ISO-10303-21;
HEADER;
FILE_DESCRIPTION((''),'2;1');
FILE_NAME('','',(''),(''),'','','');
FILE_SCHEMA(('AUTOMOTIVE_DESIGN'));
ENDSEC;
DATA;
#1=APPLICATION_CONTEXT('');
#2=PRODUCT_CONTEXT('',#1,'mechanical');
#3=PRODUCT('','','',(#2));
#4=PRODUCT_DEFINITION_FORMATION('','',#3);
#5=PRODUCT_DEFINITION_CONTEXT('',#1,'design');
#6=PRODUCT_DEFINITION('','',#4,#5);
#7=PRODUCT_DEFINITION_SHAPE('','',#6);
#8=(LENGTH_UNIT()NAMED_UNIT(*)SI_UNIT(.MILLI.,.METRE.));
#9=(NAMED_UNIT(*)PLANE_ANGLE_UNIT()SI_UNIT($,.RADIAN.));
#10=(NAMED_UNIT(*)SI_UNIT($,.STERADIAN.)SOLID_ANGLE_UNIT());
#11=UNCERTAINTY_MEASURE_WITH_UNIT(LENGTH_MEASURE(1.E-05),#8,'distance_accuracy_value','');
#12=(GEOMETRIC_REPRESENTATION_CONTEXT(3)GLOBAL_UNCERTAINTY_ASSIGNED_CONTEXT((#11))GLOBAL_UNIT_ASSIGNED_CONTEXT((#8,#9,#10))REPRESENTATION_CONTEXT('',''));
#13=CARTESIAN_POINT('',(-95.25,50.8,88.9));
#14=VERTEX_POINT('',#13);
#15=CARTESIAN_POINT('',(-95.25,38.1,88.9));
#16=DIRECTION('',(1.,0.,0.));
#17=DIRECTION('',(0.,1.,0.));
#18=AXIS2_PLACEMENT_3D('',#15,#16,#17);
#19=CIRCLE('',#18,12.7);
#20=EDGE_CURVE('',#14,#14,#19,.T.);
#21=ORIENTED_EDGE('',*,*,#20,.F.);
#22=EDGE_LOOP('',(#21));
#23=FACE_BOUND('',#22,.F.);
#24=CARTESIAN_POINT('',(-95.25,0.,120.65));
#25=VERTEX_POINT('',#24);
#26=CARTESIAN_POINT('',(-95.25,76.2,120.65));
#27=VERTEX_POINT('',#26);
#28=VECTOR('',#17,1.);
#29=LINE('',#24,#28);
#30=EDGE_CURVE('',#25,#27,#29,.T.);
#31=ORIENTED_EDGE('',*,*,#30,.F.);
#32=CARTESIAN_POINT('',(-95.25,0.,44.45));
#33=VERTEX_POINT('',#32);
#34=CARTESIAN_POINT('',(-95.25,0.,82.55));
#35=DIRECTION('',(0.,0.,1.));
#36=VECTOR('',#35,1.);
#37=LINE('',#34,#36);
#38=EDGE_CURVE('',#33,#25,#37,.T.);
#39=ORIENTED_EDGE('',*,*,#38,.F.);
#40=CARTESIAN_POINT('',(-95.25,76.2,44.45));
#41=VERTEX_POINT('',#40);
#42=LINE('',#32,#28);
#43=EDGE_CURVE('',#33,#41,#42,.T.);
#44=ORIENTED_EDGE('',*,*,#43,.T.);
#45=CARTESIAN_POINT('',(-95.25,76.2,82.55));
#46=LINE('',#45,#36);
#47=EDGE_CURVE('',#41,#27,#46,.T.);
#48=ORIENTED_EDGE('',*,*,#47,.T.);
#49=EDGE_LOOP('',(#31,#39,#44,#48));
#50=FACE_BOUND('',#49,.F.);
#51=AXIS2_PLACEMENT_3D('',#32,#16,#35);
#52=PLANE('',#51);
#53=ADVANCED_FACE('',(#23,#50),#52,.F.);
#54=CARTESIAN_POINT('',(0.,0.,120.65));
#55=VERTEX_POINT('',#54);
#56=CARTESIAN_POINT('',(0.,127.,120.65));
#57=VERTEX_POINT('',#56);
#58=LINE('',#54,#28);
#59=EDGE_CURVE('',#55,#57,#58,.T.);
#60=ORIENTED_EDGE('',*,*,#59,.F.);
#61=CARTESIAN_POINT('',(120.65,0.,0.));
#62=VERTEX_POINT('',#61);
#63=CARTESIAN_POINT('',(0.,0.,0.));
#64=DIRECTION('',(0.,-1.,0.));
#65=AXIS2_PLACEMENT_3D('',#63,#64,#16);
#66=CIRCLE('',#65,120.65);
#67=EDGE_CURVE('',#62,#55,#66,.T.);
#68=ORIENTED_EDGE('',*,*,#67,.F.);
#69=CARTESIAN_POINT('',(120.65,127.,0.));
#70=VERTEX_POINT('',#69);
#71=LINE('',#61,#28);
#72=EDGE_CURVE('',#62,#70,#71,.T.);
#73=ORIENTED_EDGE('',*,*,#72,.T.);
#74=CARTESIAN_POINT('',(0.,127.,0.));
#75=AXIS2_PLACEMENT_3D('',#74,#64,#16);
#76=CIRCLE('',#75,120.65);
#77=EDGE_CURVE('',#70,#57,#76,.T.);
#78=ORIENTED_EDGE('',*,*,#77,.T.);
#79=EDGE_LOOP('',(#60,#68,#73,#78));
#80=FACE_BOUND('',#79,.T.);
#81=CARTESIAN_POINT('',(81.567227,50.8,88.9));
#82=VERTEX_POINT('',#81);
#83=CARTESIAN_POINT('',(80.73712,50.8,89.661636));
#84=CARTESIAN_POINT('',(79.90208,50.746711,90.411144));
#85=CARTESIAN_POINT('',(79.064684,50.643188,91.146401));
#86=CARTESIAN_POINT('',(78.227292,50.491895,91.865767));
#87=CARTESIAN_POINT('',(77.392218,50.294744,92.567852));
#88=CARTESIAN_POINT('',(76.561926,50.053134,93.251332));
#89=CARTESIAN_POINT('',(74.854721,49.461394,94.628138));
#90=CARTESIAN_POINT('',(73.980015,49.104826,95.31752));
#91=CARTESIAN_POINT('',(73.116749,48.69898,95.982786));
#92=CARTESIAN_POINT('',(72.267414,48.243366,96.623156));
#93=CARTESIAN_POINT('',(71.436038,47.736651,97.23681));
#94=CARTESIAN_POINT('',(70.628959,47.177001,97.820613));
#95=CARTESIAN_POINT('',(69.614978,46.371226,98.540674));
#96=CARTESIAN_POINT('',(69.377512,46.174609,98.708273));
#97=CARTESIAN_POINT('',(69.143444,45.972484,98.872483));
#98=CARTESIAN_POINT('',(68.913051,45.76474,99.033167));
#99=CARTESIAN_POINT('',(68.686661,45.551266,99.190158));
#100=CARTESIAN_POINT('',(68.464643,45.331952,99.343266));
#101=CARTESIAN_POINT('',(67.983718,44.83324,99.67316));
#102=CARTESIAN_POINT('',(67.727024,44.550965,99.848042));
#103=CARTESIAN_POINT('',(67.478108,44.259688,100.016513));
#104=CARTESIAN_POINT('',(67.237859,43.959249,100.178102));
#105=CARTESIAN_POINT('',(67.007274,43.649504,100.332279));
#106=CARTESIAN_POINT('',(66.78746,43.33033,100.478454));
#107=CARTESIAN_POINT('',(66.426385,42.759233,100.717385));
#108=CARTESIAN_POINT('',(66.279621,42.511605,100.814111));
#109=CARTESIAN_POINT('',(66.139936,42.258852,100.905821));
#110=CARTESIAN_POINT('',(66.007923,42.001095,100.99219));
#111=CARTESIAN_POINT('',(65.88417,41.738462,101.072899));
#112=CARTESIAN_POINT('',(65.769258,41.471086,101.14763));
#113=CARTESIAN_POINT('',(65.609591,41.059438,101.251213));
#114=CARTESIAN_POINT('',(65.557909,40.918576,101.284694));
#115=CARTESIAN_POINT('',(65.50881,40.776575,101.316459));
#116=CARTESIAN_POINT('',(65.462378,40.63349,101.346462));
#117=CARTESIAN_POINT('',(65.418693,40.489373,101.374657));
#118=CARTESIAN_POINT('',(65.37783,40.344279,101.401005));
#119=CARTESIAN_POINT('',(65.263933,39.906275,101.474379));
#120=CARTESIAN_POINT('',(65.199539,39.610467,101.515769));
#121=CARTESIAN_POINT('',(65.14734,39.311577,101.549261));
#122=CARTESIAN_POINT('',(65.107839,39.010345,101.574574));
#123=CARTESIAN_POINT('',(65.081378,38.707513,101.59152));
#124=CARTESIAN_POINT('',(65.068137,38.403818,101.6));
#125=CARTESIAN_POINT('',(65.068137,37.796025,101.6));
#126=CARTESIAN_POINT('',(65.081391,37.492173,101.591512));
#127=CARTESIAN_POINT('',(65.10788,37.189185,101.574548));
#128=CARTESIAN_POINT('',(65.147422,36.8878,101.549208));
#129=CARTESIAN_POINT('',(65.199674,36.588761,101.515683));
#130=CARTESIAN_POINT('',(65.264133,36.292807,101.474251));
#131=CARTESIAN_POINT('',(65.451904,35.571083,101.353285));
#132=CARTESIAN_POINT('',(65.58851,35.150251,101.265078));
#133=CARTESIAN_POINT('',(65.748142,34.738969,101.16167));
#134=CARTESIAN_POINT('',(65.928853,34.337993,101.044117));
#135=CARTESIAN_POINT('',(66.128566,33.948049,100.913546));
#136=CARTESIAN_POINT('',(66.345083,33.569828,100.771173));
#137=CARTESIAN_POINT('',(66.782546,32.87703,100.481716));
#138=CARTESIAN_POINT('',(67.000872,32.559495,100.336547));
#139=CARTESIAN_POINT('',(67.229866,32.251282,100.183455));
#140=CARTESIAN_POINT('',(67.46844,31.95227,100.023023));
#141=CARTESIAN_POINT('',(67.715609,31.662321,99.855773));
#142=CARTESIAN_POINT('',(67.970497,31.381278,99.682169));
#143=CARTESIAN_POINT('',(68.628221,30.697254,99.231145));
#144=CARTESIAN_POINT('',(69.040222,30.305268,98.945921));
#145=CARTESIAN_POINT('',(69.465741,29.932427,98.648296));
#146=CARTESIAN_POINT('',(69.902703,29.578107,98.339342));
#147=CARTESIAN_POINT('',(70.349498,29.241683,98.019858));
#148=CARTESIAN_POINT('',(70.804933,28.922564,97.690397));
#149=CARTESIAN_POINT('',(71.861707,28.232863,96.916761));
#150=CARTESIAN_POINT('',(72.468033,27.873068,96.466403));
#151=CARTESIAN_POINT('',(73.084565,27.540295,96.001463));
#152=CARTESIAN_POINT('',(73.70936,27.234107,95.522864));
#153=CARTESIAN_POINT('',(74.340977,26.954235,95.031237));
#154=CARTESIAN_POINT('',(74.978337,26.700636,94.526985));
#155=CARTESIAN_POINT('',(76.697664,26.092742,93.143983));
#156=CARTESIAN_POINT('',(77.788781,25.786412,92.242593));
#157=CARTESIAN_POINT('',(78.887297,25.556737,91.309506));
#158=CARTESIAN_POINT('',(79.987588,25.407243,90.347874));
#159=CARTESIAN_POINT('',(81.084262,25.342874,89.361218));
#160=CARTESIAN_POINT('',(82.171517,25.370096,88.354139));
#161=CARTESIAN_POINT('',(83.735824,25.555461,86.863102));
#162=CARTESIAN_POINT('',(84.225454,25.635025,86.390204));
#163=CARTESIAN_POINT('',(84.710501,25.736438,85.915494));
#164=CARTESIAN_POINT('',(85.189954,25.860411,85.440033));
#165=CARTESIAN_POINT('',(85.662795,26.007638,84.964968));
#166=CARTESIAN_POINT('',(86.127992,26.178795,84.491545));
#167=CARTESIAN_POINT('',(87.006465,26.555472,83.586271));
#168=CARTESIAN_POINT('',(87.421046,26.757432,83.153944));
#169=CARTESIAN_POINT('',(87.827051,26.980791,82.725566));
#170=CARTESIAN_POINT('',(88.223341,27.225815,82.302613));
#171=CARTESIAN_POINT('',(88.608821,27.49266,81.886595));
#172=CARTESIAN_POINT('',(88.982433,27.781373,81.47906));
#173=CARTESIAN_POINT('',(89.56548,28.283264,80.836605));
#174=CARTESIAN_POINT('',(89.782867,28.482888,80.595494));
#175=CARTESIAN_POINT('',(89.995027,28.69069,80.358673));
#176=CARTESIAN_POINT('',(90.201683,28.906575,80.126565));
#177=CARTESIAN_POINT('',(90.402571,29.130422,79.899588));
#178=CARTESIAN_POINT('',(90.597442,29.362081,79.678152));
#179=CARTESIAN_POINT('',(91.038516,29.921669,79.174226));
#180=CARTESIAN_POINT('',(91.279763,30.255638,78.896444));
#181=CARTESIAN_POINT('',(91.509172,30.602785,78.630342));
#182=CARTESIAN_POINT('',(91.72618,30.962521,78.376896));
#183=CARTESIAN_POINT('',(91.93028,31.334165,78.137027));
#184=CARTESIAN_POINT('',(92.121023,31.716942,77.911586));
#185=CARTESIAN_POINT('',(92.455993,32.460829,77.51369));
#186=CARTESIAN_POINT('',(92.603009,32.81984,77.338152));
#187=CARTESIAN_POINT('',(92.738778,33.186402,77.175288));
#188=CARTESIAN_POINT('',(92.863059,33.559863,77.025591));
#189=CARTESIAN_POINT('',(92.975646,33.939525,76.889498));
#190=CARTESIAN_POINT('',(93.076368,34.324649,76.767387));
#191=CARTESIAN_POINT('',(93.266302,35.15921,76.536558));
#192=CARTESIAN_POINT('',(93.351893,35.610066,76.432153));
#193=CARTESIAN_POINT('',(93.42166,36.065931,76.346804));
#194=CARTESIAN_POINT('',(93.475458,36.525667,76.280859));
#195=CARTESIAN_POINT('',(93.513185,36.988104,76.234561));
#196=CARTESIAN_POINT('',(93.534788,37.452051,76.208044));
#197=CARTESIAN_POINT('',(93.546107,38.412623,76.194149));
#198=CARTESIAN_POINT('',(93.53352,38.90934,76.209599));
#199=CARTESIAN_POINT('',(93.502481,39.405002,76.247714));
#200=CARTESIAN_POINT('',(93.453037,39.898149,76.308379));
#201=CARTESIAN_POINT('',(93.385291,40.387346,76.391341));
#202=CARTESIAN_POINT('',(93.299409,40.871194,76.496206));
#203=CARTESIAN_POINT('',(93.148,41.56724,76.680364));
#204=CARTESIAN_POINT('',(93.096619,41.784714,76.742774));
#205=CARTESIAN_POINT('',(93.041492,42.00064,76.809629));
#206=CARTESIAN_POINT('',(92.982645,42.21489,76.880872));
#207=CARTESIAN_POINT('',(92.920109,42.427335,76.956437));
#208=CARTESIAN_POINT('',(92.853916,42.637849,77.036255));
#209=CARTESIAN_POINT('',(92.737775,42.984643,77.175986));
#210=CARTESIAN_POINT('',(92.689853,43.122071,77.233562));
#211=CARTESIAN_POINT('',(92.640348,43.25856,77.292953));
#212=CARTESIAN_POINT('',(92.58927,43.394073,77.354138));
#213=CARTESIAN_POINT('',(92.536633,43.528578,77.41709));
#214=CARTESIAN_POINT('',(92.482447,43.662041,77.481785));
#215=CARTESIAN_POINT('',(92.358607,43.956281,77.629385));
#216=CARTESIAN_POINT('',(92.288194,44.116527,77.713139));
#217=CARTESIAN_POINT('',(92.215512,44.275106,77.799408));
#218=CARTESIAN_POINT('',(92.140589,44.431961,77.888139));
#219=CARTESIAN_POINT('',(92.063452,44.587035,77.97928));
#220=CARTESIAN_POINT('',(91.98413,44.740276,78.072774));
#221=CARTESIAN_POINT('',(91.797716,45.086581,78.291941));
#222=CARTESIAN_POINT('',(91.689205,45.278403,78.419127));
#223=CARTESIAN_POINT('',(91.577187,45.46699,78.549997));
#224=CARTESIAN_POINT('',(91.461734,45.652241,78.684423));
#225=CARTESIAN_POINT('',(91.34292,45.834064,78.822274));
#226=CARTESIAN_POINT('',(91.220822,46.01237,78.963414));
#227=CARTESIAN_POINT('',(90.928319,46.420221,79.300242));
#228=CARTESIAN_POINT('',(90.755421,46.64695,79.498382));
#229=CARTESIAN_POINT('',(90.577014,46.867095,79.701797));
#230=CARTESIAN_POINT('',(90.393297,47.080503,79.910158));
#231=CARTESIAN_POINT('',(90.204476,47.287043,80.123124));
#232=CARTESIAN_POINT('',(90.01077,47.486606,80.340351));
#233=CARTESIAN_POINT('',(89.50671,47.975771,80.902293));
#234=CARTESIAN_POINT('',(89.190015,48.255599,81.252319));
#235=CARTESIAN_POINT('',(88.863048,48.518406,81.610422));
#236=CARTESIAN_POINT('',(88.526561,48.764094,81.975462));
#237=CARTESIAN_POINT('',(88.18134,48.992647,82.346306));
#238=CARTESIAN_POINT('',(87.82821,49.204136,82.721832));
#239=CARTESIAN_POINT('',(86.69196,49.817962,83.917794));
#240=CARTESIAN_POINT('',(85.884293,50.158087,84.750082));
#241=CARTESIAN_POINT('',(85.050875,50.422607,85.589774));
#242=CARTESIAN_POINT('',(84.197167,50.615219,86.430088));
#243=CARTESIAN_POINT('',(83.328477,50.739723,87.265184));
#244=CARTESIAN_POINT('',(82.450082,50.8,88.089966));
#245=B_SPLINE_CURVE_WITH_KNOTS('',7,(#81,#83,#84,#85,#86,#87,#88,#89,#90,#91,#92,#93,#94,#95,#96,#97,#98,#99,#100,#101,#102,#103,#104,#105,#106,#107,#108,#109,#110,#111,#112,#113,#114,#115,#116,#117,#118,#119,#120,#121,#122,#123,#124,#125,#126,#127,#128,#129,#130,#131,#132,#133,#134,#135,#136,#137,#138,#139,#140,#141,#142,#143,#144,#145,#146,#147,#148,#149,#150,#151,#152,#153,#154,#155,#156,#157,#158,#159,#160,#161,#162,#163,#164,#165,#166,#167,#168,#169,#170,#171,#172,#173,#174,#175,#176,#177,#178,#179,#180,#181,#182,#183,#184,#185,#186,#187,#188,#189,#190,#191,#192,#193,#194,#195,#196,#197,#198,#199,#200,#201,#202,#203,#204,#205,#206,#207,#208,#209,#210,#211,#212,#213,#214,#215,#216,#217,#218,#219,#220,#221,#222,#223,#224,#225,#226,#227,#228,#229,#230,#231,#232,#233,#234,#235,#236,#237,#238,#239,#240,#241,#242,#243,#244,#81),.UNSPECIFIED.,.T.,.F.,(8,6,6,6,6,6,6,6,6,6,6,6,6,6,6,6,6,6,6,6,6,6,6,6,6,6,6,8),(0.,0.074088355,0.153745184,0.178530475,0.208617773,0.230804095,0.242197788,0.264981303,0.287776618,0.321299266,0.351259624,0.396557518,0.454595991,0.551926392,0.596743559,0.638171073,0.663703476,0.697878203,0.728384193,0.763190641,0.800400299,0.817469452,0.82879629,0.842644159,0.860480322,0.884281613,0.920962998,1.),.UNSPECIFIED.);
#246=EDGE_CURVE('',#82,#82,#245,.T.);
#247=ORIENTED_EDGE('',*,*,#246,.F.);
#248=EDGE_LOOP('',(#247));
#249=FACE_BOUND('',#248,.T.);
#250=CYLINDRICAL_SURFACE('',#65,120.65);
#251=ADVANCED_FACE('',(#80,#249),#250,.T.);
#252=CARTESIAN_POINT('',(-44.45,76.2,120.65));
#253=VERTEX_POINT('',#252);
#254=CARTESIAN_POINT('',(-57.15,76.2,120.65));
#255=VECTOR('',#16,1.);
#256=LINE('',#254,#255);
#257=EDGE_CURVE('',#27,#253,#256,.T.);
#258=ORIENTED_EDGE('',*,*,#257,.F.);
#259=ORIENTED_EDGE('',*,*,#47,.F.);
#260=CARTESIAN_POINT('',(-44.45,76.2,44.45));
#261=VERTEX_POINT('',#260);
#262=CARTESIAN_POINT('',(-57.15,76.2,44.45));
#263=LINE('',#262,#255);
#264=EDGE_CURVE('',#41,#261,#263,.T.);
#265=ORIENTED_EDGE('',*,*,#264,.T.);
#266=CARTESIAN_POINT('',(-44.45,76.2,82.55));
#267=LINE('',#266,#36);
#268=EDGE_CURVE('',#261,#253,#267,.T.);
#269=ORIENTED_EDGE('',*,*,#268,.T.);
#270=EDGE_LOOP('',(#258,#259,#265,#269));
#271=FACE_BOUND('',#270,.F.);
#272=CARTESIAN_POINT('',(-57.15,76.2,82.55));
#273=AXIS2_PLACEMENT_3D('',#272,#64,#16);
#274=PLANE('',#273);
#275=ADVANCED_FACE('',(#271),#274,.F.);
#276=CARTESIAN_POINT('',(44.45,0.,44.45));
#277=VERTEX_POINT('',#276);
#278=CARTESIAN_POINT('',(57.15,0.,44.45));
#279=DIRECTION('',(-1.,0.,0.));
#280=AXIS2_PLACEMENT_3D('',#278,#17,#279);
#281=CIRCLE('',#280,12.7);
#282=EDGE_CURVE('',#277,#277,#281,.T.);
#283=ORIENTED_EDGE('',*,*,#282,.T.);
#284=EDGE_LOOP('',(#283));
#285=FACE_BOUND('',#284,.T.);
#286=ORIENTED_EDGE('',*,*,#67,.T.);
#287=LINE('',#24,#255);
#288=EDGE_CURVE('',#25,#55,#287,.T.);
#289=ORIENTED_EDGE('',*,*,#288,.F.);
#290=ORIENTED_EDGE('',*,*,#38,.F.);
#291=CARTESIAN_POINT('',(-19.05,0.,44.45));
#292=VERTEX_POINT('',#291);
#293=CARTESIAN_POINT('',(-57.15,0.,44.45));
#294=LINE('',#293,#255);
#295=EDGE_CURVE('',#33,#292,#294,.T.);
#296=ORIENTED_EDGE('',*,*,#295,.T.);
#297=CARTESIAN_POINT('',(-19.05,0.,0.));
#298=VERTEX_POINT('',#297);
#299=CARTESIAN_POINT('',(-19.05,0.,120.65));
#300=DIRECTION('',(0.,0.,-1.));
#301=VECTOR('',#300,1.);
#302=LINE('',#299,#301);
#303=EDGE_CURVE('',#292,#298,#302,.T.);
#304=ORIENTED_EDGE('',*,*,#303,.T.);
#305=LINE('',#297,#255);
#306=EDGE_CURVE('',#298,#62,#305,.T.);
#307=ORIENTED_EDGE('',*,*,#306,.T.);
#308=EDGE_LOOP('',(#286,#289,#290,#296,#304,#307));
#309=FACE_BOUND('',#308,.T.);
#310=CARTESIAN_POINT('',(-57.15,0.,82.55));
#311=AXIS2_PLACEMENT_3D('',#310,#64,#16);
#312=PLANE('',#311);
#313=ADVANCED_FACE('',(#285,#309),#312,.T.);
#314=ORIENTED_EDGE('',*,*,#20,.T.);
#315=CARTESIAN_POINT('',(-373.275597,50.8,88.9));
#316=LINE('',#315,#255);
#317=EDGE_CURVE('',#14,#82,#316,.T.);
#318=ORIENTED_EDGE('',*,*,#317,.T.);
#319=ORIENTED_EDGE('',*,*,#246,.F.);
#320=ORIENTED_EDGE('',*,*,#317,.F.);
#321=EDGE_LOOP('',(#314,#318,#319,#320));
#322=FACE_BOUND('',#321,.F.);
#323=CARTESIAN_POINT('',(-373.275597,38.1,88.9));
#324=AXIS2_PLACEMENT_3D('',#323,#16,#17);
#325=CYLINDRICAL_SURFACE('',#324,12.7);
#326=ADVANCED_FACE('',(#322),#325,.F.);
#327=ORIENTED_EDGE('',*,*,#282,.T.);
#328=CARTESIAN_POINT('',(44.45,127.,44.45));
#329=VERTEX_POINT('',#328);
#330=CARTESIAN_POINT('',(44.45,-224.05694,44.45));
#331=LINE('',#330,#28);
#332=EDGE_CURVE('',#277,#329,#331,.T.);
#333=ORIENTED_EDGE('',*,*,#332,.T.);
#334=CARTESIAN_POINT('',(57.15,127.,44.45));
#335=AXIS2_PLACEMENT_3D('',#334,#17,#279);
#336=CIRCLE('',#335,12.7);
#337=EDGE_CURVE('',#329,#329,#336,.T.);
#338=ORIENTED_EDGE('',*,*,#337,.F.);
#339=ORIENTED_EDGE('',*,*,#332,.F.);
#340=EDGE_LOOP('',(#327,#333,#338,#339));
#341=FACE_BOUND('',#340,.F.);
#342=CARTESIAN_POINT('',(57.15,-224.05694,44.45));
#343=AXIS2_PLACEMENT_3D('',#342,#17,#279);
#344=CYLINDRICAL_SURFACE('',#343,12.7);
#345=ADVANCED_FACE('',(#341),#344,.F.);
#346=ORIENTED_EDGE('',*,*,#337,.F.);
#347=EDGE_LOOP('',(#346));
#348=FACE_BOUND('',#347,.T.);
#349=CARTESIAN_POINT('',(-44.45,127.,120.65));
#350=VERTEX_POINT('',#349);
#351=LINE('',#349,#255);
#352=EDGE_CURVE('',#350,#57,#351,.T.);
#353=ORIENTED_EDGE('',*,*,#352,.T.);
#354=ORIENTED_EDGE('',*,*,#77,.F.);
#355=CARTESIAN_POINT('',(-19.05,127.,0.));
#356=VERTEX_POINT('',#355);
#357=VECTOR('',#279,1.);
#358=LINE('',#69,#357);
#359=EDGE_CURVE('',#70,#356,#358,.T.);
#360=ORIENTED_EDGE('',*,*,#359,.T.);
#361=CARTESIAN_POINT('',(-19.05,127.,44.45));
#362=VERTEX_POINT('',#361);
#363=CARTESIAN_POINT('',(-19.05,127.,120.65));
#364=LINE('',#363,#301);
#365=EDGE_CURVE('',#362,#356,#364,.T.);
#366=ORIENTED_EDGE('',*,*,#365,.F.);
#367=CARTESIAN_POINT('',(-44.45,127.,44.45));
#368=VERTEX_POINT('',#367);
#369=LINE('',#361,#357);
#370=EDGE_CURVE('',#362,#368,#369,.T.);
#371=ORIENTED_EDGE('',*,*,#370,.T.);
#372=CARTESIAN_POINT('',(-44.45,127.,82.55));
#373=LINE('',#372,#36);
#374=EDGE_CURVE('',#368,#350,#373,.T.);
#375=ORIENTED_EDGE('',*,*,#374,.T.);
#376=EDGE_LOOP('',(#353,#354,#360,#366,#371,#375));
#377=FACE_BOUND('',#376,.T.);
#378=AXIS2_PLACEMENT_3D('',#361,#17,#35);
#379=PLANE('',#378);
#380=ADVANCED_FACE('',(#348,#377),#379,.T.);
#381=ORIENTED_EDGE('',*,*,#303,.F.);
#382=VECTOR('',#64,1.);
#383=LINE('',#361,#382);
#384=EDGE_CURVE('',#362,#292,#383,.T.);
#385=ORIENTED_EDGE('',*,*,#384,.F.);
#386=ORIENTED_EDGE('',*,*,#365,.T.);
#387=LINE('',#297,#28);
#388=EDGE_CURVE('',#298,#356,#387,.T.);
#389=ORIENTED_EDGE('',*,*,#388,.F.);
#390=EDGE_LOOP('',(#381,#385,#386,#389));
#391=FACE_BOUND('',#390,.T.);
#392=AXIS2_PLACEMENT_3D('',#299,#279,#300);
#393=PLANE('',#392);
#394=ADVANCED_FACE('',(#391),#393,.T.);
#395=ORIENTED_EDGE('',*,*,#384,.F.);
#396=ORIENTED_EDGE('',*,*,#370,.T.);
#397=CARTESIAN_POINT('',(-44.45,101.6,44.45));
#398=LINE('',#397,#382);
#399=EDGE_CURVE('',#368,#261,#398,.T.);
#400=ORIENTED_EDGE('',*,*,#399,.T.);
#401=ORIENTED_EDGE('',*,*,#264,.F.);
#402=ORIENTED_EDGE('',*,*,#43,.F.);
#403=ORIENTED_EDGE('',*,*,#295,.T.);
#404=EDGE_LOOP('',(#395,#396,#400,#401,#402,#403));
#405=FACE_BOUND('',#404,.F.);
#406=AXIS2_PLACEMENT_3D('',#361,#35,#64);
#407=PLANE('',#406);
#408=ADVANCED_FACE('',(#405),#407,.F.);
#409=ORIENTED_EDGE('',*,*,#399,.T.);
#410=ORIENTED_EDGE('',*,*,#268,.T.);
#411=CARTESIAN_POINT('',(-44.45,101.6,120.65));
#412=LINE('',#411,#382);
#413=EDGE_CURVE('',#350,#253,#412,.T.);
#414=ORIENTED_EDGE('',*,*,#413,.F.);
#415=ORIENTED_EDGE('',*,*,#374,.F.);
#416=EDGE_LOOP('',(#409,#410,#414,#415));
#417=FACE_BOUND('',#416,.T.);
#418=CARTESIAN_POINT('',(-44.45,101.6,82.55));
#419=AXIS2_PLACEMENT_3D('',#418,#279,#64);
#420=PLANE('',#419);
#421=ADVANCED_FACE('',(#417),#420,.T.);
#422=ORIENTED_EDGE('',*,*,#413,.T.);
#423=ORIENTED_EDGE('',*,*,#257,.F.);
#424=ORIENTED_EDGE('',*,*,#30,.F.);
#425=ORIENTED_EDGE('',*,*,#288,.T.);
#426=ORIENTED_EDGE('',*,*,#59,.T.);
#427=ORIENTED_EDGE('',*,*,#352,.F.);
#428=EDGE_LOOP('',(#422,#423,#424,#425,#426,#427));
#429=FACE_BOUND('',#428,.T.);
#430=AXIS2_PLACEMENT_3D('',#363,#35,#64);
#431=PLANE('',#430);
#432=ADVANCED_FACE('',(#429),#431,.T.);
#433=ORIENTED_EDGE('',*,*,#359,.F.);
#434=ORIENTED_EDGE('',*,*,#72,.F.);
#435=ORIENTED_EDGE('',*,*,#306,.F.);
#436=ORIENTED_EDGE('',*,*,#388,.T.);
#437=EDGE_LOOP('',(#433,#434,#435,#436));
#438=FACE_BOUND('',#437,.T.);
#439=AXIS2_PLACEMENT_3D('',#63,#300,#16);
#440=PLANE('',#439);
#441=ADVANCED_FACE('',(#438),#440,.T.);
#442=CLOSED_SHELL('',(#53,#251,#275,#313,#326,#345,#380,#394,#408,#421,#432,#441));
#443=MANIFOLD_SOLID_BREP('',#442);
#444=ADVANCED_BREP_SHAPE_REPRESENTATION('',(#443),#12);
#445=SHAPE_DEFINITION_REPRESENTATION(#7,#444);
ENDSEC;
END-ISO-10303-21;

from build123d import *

# Parameters (mm, degrees)
F1_DEPTH  = 127
F2_DEPTH  = 127
F3_D      = 25.4
F0_W      = 76.2
F0_H      = 76.2
F4_DEPTH  = 76.2
F6_D      = 25.4
F9_W      = 50.8
F9_H      = 76.2
F10_DEPTH = 25.4


# Not quite as in the source:
# - a feature of the source that left no trace in its solid (it failed there, or was rolled back) is left out
# - a feature names something its author has since deleted; it is built from what else it names


with BuildPart() as f1:
    # F0 (on Front) → F1 (new body)
    with BuildSketch(Plane.XZ):
        with BuildLine():
            Line((0, 0), (120.65, 0))
            ThreePointArc((120.65, 0), (85.3124331502, 85.3124331502), (0, 120.65))
            Line((0, 120.65), (0, 44.45))
            Line((0, 44.45), (0, 0))
        make_face()
    extrude(amount=-F1_DEPTH)

    # F0 (on Front) → F2 (join)
    with BuildSketch(Plane.XZ):
        Polygon((0, 44.45), (0, 120.65), (-19.05, 120.65), (-19.05, 44.45), (-19.05, 0), (0, 0), align=None)
    extrude(amount=-F2_DEPTH)

    # F3 (through all)
    with Locations(Plane.XZ):
        with Locations((57.15, 44.45)):
            Hole(F3_D / 2)

    # F0 (on Front) → F4 (join)
    with BuildSketch(Plane.XZ):
        with Locations((-57.15, 82.55)):
            Rectangle(F0_W, F0_H)
    extrude(amount=-F4_DEPTH)

    # F6 (through all)
    with Locations(Plane(origin=(-95.25, 0, 0), x_dir=(0, -1, 0), z_dir=(-1, 0, 0))):
        with Locations((-38.1, 88.9)):
            Hole(F6_D / 2)

    # F9 (on face) → F10 (join)
    with BuildSketch(Plane(origin=(-19.05, 0, 0), x_dir=(0, -1, 0), z_dir=(-1, 0, 0))):
        with Locations((-101.6, 82.55)):
            Rectangle(F9_W, F9_H)
    extrude(amount=F10_DEPTH)


solid = f1.part
